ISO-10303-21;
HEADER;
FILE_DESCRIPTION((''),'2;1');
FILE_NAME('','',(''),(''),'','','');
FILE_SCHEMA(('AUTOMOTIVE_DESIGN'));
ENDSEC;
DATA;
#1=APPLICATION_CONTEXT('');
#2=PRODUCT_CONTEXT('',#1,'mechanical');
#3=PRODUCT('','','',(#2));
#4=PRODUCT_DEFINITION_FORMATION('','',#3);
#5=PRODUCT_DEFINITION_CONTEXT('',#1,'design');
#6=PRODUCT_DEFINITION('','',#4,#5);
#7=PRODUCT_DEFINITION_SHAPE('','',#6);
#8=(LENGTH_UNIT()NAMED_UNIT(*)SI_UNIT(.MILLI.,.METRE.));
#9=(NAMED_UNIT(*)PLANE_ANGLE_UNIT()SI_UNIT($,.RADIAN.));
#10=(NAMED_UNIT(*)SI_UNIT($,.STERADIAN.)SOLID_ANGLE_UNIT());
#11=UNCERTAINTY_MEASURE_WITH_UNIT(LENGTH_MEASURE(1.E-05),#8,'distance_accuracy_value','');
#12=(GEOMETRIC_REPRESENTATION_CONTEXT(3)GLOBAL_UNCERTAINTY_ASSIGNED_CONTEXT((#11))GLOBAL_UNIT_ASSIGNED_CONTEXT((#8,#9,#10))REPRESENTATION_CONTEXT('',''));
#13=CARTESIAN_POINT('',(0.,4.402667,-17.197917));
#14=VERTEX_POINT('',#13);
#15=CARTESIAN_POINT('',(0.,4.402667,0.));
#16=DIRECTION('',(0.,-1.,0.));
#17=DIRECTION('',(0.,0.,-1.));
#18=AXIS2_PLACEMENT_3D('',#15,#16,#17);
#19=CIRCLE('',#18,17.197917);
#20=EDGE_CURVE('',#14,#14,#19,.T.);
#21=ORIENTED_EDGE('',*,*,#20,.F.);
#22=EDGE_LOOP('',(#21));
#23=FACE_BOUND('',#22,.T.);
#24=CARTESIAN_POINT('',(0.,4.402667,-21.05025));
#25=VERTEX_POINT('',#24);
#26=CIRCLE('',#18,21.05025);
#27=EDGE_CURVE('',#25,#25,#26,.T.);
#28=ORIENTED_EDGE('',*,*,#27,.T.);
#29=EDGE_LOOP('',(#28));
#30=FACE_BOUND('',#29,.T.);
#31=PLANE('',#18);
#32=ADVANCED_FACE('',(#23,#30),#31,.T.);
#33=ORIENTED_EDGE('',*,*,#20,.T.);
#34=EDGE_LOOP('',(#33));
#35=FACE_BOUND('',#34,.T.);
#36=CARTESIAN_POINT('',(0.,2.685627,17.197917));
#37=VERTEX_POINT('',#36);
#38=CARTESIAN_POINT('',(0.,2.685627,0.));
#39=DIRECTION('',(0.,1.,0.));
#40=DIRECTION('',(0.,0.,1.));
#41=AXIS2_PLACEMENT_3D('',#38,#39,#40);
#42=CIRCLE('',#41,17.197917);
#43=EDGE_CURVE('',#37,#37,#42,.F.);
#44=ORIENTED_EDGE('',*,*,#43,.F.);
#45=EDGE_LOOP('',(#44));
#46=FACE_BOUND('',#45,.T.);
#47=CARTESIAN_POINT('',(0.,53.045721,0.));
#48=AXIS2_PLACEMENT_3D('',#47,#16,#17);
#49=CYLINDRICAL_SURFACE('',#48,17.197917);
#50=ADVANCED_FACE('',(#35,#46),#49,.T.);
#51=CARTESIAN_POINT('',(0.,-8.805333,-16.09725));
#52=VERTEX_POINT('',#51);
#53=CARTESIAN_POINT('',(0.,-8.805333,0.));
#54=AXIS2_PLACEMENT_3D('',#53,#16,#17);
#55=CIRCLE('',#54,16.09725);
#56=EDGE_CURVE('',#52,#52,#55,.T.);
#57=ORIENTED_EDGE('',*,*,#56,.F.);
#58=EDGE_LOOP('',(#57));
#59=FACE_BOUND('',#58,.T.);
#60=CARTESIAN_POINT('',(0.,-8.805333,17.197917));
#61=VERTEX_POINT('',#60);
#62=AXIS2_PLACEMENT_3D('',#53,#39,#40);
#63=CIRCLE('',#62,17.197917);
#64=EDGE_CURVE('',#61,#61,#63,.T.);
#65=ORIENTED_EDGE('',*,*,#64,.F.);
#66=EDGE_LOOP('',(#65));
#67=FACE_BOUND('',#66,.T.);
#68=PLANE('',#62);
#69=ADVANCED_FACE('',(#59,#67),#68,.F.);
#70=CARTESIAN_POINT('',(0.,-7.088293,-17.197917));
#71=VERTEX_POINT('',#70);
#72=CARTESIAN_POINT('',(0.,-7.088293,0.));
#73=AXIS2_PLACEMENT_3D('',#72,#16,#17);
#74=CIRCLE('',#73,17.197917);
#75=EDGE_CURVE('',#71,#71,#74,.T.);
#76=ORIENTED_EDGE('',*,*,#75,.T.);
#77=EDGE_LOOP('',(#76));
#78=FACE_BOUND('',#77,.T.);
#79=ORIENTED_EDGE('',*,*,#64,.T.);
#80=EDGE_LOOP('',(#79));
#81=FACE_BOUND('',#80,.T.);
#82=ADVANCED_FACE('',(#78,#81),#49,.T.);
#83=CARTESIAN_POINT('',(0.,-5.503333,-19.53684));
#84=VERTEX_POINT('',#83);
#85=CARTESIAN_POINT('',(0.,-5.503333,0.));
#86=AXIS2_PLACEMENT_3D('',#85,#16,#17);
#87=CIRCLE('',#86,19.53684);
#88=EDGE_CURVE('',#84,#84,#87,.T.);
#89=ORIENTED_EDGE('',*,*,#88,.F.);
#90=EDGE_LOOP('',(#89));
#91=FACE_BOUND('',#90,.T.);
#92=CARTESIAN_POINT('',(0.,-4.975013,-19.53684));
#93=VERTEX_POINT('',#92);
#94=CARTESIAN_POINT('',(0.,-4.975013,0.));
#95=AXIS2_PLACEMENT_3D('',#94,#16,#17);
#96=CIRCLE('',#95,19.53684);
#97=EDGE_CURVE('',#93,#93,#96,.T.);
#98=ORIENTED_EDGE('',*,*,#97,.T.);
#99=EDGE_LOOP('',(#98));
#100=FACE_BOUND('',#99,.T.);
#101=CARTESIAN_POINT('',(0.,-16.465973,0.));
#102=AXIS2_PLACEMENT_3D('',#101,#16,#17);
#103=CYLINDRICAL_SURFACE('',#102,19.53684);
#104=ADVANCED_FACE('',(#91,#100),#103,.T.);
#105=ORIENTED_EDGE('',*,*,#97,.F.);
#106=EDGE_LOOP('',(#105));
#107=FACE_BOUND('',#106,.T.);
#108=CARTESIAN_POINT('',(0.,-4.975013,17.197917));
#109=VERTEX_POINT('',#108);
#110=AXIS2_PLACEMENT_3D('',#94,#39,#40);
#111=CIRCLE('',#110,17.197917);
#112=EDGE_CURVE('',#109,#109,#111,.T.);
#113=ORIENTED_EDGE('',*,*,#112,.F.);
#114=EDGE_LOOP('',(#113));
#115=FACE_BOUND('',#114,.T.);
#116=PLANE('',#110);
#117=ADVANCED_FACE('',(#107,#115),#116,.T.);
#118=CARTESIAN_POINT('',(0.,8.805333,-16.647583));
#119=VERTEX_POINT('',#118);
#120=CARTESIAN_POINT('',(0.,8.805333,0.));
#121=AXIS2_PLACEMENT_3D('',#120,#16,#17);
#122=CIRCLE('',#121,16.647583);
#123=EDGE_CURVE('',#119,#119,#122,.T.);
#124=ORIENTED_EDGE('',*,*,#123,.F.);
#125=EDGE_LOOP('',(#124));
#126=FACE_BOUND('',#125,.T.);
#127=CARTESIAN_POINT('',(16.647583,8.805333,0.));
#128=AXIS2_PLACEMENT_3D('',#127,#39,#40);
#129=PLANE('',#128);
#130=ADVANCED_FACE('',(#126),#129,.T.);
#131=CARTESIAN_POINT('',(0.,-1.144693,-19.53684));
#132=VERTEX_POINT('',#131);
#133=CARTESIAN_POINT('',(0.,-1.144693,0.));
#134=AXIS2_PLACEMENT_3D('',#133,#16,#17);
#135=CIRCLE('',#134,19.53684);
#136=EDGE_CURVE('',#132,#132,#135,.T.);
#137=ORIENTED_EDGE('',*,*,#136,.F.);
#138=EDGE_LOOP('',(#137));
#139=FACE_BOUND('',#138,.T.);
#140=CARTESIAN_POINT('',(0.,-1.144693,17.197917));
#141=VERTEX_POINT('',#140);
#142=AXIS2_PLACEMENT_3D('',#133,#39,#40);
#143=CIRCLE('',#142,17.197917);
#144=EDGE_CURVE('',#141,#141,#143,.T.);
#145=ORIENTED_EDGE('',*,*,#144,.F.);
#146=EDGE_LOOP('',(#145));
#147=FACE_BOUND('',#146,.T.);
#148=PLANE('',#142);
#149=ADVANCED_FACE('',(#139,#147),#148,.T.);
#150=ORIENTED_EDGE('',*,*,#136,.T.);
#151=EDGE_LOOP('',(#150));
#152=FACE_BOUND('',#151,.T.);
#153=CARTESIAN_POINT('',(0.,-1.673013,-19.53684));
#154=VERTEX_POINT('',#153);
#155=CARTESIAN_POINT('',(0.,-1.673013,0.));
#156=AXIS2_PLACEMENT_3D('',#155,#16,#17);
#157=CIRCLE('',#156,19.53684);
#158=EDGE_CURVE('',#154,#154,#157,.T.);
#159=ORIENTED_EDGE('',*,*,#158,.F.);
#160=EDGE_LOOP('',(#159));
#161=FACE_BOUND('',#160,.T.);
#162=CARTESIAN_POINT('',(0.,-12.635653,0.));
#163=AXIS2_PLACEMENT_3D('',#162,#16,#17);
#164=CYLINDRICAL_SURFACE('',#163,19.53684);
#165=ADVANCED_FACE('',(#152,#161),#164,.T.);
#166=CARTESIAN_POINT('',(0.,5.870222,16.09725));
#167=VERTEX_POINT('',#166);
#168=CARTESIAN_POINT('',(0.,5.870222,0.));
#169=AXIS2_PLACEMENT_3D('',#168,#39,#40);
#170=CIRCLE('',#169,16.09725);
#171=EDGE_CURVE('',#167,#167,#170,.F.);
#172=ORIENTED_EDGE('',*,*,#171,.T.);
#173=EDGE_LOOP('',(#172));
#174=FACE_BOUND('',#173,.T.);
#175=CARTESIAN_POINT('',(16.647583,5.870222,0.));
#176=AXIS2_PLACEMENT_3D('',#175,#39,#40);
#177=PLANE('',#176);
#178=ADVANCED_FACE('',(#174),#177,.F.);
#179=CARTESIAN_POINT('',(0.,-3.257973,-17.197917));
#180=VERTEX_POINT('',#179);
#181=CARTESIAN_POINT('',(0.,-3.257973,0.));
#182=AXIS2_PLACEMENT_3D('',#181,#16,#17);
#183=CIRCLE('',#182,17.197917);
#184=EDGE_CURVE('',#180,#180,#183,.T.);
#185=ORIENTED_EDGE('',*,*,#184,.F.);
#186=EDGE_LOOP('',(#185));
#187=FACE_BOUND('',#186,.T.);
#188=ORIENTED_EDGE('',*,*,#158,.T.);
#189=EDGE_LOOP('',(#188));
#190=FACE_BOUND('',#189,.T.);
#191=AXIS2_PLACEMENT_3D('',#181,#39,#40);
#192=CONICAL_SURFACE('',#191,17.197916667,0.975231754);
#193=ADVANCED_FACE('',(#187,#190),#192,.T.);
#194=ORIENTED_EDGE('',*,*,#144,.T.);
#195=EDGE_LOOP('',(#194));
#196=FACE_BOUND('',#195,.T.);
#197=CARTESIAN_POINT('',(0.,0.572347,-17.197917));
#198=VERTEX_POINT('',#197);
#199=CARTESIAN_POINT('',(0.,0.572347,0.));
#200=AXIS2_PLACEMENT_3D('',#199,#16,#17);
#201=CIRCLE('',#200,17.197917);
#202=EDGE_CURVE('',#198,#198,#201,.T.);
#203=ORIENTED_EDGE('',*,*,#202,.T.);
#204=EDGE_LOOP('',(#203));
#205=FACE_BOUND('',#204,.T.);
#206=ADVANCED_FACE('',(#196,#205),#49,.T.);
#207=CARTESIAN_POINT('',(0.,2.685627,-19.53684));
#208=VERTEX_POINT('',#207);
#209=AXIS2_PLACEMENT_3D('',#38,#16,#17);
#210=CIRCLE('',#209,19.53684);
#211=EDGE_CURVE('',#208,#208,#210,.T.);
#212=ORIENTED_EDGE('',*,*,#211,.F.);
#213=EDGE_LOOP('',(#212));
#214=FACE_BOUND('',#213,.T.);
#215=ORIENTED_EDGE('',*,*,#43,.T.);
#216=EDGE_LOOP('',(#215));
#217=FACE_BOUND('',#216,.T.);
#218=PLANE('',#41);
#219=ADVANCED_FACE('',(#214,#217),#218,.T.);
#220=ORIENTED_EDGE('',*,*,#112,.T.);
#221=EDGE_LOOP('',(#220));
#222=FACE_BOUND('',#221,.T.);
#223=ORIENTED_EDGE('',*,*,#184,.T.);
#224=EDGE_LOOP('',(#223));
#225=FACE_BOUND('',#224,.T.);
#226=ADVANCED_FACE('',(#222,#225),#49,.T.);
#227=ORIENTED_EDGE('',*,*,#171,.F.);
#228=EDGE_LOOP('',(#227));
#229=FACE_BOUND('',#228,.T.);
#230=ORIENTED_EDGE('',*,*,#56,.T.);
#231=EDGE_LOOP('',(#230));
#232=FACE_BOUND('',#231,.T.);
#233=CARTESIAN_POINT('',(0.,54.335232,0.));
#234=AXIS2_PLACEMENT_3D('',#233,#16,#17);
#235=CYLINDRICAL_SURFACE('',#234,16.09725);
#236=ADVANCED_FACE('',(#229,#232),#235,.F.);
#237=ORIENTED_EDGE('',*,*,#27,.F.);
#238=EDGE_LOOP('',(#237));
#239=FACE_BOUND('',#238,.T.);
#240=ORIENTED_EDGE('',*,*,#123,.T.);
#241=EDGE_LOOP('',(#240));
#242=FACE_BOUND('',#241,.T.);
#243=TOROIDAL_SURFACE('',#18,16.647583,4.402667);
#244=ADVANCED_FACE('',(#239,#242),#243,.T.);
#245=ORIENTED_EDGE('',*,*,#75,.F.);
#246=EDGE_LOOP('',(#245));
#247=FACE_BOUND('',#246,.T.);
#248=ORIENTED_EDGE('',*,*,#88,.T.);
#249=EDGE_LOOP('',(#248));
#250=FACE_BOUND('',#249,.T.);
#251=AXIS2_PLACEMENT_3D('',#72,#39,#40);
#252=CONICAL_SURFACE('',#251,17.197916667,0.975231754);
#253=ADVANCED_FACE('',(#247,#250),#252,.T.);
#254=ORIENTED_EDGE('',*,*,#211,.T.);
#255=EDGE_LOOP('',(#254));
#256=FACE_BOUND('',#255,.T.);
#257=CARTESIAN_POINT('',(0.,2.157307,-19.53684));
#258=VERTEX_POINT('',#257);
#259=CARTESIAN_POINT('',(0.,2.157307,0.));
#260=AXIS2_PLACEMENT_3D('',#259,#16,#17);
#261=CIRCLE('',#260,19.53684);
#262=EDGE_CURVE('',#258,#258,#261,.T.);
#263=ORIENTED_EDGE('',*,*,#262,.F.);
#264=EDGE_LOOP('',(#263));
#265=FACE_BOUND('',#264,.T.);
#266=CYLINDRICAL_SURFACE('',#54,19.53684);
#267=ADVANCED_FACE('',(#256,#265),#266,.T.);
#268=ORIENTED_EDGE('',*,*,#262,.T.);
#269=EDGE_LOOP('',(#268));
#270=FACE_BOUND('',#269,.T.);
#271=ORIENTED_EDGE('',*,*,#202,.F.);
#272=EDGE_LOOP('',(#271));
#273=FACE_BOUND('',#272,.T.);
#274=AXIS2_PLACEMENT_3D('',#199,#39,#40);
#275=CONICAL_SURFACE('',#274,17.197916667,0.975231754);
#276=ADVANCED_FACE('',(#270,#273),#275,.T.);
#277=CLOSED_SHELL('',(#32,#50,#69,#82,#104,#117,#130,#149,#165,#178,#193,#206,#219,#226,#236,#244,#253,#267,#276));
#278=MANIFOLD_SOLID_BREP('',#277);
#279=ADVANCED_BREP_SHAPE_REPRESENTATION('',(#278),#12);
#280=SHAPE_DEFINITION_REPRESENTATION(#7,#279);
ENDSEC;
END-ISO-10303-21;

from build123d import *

# Parameters (mm, degrees)
BOSS_EXTRUDE1_START = -8.805333
SKETCH5_R           = 17.197916667
BOSS_EXTRUDE1_DEPTH = 13.208
SKETCH6_R           = 16.09725
CUT_EXTRUDE1_DEPTH  = 14.675555556


# Read off the part's stored shape, not the designer's step: LPattern1
with BuildPart() as part:
    # Sketch4 → Revolve2 (revolve)
    with BuildSketch(Plane.XY, mode=Mode.PRIVATE) as revolve2_sk:
        with BuildLine():
            Line((0, 8.805333333), (0, 4.402666667))
            Line((0, 4.402666667), (21.05025, 4.402666667))
            ThreePointArc((21.05025, 4.402666667), (19.760738789, 7.515822122), (16.647583333, 8.805333333))
            Line((16.647583333, 8.805333333), (0, 8.805333333))
        make_face()
        Polygon((0, 2.685626667), (19.536840212, 2.685626667), (19.536840212, 2.157306667), (17.197916667, 0.572346667), (0, 0.572346667), align=None)
    revolve(revolve2_sk.sketch.rotate(Axis((0, -8.805333333, 0), (0, 1, 0)), 90), axis=Axis((0, -8.805333333, 0), (0, 1, 0)))



with BuildPart() as body_2:
    # LPattern1 outline → LPattern1 (revolve)
    with BuildSketch(Plane.XY):
        Polygon((19.536840212, -5.503333333), (19.536840212, -4.975013333), (0, -4.975013333), (0, -7.088293333), (17.197916667, -7.088293333), align=None)
        Polygon((0, -1.144693333), (0, -3.257973333), (17.197916667, -3.257973333), (19.536840213, -1.673013333), (19.536840212, -1.144693333), align=None)
    revolve(axis=Axis((0, 0, 0), (0, 1, 0)))


with BuildPart() as part_1:
    add(part.part)

    add(body_2.part)  # Boss-Extrude1 merges body 2
    # Sketch5 → Boss-Extrude1 (add)
    with BuildSketch(Plane(origin=(0, 0, 0), x_dir=(1, 0, 0), z_dir=(0, 1, 0)).offset(BOSS_EXTRUDE1_START)):
        with Locations(Location((0, 0, 0), (0, 0, 90))):
            Circle(SKETCH5_R)
    extrude(amount=BOSS_EXTRUDE1_DEPTH)

    # Sketch6 → Cut-Extrude1 (cut)
    with BuildSketch(Plane.XZ.offset(8.805333333)):
        with Locations(Location((0, 0, 0), (0, 0, 270))):
            Circle(SKETCH6_R)
    extrude(amount=-CUT_EXTRUDE1_DEPTH, mode=Mode.SUBTRACT)


solid = part_1.part
